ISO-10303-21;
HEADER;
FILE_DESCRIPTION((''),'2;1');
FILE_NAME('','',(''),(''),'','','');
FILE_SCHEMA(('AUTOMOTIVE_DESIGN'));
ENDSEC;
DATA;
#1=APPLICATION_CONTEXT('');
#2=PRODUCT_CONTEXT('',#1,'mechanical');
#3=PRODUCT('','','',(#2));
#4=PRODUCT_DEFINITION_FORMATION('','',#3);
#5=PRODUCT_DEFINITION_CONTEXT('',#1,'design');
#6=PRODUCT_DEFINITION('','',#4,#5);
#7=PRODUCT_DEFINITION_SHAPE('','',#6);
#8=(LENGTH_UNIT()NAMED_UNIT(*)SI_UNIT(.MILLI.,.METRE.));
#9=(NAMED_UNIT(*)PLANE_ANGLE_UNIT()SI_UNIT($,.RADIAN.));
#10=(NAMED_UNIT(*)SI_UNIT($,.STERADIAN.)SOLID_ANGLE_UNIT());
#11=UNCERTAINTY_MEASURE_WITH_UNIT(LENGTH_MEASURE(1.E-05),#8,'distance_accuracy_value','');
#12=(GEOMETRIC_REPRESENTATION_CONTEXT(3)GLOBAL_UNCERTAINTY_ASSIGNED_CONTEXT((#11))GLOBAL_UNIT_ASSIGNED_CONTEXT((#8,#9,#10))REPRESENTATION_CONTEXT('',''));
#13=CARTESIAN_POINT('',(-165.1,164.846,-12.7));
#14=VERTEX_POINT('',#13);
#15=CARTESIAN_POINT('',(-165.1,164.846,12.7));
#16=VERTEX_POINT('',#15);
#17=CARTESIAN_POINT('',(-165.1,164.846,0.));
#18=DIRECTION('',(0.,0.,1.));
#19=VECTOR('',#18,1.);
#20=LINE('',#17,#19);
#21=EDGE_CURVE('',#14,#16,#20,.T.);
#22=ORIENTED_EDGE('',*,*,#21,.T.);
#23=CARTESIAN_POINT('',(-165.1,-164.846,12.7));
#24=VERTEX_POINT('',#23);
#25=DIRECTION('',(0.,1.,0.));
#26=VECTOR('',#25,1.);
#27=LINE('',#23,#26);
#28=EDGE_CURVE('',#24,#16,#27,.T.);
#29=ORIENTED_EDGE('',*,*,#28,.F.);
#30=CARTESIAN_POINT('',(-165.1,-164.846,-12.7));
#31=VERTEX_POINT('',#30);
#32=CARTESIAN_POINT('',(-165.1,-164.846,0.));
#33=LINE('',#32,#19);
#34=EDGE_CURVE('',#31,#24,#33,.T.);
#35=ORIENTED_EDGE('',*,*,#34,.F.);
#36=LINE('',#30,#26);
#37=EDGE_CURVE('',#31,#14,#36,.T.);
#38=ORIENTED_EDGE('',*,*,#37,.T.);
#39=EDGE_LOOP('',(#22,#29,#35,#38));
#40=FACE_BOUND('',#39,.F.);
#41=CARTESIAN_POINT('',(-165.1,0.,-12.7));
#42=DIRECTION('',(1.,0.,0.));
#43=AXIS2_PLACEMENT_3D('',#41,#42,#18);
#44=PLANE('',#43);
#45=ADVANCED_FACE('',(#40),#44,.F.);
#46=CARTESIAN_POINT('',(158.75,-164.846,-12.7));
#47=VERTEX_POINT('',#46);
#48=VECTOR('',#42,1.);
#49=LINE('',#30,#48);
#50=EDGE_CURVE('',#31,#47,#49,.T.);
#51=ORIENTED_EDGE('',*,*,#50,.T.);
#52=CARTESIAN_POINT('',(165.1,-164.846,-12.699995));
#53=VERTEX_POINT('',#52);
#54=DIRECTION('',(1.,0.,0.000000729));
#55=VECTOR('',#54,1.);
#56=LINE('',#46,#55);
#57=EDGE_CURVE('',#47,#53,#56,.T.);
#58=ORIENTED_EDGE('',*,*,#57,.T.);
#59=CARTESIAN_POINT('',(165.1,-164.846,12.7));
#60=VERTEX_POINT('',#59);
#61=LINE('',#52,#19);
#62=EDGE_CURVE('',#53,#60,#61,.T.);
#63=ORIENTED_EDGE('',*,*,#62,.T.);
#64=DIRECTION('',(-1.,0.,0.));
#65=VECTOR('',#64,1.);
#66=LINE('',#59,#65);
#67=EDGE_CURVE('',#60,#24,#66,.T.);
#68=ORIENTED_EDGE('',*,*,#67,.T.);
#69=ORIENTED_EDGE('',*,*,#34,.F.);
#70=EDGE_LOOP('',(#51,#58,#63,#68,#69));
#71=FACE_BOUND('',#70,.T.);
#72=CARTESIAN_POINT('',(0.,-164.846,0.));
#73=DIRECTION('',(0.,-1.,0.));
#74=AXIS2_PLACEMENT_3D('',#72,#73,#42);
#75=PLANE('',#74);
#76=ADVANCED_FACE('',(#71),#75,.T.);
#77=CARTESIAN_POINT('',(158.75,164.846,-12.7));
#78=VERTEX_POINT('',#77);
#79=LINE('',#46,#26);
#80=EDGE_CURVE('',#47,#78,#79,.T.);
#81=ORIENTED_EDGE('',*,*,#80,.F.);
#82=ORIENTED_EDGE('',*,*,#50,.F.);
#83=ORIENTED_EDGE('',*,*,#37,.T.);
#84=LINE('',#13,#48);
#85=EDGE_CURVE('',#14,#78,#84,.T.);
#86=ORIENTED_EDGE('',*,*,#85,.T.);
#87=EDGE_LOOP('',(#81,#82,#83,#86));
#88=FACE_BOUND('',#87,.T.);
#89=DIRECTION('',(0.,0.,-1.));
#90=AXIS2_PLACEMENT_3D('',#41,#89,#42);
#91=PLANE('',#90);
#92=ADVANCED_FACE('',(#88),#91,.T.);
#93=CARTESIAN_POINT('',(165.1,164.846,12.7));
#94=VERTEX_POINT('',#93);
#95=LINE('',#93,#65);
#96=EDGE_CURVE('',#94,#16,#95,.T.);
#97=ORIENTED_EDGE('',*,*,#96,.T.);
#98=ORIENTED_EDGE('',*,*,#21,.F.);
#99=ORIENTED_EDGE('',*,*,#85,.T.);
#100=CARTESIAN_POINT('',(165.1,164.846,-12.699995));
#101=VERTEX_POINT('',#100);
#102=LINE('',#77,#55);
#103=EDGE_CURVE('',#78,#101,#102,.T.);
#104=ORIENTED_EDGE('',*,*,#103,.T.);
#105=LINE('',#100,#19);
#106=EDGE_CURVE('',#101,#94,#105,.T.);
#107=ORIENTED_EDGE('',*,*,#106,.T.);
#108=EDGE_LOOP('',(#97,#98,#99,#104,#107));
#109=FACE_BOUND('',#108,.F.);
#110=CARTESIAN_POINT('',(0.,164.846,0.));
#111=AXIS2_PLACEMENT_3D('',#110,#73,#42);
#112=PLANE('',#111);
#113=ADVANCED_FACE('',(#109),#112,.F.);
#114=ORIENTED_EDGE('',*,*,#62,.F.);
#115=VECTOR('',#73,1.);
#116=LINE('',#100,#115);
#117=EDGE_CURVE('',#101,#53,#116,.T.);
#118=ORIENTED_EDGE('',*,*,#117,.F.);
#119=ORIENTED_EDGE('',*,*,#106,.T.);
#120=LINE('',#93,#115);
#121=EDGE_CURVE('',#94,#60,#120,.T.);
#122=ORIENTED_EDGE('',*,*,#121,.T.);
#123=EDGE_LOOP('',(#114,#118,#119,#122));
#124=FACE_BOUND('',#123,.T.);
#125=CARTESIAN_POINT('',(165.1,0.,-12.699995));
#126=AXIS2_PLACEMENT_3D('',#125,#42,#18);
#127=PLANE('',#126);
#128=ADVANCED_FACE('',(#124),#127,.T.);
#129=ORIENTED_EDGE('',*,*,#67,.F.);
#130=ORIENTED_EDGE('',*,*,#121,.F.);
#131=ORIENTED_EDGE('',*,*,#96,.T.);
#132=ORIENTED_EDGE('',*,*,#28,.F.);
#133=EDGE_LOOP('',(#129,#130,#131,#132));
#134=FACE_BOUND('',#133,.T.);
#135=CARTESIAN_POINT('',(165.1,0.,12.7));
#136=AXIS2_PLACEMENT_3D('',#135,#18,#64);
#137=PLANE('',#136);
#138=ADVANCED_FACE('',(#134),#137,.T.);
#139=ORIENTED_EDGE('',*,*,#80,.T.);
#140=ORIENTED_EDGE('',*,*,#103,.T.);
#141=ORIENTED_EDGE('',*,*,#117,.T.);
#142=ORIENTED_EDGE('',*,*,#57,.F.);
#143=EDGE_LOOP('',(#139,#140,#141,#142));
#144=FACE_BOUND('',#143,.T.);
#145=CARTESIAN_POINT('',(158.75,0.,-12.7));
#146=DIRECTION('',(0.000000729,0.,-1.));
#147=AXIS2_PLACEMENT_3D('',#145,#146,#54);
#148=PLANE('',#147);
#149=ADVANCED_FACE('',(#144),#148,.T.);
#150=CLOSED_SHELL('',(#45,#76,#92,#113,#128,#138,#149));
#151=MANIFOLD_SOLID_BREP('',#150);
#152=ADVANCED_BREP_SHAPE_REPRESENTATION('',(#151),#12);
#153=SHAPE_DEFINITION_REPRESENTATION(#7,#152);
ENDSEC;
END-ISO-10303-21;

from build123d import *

# Parameters (mm, degrees)
F0_W     = 317.5
F0_H     = 25.4
F0_W_2   = 6.35
F1_DEPTH = 164.846


# Not quite as in the source:
# - ends of sketch curves that miss each other by under 0.0002 mm in the source are joined


with BuildPart() as f1:
    # F0 (on Front) → F1 (new body, symmetric)
    with BuildSketch(Plane.XZ):
        Rectangle(F0_W, F0_H)
        Polygon((165.1, 12.7), (158.75, 12.7), (158.75, -12.7), (165.1, -12.6999953677), align=None)
        with Locations((-161.925, 0)):
            Rectangle(F0_W_2, F0_H)
    extrude(amount=F1_DEPTH, both=True)


solid = f1.part
